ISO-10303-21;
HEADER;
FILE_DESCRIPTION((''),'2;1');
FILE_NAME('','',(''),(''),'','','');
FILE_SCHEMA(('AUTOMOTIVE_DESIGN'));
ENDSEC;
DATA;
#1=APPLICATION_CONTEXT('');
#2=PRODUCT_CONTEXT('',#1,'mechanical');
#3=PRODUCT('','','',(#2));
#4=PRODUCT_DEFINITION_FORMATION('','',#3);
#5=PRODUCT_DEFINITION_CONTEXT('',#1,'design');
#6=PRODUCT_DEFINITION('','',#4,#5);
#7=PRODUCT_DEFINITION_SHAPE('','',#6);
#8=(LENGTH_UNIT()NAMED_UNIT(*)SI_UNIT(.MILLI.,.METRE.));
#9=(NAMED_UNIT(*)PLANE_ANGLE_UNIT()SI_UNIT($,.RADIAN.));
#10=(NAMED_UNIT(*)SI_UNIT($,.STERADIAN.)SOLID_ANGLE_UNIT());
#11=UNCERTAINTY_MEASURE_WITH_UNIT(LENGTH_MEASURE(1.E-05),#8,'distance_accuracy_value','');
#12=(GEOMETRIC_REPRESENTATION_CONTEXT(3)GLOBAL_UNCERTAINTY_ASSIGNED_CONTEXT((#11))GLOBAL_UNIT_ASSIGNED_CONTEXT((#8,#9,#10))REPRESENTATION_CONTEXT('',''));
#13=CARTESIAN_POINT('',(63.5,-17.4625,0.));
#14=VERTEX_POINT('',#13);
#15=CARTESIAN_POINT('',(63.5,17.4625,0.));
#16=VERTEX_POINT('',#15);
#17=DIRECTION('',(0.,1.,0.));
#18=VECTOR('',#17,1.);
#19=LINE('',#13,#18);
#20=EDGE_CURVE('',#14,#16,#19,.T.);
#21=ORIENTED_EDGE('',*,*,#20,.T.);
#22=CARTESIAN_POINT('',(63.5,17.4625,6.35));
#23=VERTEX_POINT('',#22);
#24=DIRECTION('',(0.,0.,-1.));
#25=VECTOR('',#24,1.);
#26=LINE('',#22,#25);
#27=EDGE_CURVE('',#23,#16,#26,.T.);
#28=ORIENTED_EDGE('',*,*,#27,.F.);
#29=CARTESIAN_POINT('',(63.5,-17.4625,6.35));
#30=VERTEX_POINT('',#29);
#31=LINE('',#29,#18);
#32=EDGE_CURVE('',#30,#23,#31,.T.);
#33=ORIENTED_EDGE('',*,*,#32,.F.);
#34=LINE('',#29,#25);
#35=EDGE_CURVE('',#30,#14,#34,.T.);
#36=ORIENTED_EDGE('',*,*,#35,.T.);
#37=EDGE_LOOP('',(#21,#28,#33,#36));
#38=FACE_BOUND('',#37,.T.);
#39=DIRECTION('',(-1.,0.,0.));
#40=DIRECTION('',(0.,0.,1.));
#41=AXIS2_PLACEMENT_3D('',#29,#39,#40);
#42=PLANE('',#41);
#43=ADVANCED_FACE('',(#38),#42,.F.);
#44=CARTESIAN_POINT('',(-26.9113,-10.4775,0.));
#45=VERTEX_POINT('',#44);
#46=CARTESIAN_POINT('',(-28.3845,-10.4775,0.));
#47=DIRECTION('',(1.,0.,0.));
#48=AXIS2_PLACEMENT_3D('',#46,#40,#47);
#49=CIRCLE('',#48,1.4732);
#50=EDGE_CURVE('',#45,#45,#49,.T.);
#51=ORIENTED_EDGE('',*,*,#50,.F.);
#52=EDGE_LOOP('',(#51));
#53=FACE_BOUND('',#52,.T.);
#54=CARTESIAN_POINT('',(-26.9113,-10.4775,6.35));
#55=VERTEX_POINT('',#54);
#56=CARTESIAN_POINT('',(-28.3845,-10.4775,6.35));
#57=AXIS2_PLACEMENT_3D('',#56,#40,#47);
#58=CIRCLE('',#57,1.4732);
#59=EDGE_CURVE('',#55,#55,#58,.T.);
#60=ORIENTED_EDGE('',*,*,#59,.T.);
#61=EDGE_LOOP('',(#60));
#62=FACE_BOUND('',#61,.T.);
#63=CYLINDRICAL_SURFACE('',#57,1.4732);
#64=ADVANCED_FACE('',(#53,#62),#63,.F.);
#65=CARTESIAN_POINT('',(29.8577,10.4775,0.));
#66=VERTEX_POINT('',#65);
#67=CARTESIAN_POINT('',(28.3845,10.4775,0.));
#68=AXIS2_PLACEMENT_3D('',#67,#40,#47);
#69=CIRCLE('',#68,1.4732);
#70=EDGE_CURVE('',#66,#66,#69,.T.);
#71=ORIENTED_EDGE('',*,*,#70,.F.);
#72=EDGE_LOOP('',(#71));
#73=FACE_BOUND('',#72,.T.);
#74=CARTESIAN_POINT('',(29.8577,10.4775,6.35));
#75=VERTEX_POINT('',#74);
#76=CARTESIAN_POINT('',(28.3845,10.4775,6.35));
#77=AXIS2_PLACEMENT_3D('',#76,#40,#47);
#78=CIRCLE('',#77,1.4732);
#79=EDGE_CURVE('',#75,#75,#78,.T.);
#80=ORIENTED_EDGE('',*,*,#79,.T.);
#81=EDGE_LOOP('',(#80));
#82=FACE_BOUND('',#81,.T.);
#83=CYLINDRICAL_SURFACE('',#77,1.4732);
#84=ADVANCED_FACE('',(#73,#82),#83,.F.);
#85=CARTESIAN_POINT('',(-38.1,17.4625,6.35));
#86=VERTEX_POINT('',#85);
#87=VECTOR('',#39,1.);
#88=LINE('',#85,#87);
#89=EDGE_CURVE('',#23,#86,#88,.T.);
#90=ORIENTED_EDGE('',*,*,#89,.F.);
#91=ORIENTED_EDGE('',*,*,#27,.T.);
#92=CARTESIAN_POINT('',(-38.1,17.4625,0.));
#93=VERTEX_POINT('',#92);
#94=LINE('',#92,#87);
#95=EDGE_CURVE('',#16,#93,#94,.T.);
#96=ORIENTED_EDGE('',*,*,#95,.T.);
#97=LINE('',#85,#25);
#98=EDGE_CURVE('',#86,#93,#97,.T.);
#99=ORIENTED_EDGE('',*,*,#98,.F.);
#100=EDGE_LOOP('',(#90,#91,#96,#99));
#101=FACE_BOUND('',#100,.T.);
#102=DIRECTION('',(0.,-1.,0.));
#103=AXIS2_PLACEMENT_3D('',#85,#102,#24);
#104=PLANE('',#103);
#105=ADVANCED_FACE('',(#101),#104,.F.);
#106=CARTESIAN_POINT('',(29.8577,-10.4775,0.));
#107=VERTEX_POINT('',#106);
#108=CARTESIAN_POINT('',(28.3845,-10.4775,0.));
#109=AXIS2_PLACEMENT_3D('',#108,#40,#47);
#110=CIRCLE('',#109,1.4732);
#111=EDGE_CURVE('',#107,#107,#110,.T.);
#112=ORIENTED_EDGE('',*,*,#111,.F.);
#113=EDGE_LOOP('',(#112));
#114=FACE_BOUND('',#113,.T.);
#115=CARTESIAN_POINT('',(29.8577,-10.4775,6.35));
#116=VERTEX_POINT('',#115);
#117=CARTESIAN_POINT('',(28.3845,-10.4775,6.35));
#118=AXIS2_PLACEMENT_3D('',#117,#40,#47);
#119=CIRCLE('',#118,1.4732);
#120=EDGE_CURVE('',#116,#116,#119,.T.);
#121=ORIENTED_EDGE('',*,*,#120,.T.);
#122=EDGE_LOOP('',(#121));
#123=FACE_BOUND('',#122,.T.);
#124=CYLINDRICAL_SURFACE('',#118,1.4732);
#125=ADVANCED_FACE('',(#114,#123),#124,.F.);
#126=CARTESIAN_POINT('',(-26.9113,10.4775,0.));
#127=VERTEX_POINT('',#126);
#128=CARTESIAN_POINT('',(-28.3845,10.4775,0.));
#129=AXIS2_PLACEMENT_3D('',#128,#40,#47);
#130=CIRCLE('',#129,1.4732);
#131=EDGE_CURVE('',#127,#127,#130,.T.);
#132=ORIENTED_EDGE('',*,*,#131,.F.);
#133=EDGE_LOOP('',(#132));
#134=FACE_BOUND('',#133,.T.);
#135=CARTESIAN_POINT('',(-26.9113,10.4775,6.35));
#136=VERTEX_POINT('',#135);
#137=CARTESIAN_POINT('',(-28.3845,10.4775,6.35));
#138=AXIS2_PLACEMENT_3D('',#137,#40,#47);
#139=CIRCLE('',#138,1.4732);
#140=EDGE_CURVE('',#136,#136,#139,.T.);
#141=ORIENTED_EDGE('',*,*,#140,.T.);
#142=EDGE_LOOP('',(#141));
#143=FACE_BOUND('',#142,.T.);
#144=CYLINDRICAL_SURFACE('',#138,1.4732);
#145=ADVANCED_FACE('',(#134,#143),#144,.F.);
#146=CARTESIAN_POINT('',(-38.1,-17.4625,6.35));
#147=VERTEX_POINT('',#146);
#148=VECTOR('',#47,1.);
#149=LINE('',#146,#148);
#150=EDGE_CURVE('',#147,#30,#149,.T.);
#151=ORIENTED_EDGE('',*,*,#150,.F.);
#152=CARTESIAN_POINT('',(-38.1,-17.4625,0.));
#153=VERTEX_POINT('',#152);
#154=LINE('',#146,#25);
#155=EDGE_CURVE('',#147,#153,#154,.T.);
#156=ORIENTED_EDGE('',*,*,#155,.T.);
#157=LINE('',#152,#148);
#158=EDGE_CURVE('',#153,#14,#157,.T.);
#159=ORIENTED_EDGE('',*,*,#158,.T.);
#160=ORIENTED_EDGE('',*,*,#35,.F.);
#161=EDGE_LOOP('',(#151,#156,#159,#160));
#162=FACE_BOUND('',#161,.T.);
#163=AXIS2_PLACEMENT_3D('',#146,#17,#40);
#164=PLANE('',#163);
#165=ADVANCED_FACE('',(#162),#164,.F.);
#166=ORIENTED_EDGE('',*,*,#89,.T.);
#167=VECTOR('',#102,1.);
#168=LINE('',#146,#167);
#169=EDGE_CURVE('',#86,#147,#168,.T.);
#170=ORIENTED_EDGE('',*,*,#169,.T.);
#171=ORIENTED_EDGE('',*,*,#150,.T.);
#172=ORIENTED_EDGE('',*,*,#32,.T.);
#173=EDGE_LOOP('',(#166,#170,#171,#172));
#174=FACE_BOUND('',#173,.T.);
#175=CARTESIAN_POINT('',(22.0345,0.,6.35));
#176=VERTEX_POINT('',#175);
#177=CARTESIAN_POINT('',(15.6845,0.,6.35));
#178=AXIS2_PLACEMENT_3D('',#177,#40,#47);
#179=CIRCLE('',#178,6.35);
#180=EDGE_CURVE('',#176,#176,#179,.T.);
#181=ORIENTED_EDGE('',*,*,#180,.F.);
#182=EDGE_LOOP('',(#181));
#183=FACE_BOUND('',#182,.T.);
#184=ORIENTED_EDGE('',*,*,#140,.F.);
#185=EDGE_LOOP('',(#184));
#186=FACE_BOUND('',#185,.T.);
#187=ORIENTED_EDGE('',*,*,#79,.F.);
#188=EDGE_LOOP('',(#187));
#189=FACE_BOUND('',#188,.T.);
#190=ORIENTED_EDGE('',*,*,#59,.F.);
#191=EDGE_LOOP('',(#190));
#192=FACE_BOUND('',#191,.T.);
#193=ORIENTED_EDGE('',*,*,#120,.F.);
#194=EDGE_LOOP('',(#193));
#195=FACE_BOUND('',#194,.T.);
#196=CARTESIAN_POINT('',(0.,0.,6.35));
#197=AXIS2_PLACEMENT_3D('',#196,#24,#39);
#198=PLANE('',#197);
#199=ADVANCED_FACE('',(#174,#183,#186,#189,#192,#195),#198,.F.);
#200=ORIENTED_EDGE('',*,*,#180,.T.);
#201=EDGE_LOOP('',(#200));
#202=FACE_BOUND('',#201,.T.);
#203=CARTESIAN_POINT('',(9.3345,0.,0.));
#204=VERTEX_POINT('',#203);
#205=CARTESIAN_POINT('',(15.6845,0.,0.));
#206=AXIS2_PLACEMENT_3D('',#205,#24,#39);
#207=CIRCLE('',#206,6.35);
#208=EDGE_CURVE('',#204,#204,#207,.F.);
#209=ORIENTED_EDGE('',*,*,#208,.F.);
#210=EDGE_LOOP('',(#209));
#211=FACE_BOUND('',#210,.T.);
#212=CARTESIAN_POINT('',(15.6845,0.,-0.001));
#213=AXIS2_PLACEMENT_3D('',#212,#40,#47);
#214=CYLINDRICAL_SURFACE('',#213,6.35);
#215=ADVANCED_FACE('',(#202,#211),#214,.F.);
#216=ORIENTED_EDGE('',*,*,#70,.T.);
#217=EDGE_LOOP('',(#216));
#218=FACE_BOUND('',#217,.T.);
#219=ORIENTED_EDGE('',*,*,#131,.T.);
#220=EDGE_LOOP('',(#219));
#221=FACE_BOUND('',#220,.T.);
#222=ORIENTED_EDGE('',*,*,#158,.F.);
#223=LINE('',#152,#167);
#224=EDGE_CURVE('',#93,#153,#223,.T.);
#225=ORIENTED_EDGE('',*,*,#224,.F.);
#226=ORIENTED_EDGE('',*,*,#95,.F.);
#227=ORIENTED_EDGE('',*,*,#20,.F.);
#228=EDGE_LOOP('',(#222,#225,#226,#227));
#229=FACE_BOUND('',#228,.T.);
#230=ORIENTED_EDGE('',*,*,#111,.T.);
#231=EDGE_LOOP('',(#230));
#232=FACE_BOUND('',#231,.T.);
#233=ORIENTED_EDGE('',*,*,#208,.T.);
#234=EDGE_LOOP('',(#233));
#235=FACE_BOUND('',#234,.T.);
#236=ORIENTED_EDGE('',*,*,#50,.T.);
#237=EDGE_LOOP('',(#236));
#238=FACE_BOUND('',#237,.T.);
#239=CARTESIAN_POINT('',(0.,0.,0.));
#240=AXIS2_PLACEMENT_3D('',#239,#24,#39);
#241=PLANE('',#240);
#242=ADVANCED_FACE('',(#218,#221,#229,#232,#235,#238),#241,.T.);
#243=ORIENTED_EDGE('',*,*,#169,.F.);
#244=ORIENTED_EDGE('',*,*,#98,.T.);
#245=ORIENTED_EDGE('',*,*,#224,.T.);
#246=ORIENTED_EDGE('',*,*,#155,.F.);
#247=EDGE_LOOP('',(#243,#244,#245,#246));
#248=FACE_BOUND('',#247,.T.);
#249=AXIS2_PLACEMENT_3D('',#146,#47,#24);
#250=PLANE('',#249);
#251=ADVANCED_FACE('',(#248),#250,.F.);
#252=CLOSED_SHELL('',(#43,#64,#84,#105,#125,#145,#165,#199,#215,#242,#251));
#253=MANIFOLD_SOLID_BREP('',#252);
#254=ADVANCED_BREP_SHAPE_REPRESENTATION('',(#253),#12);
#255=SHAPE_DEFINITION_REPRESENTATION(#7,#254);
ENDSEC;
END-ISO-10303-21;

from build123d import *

# Parameters (mm, degrees)
SKETCH1_W               = 101.6
SKETCH1_H               = 34.925
BOSS_EXTRUDE1_DEPTH     = 6.35
ADVANCEDHOLE1_OUTLINE_R = 1.4732
ADVANCEDHOLE1_DEPTH     = 6.35
CUT_EXTRUDE1_REACH      = 68.163
SKETCH5_R               = 6.35


# Read off the part's stored shape, not the designer's step: AdvancedHole1
with BuildPart() as part:
    # Sketch1 → Boss-Extrude1 (new body)
    with BuildSketch(Plane.XY):
        with Locations((12.7, 0)):
            Rectangle(SKETCH1_W, SKETCH1_H)
    extrude(amount=BOSS_EXTRUDE1_DEPTH)

    # AdvancedHole1 outline → AdvancedHole1 (cut)
    with BuildSketch(Plane.XY):
        with Locations((28.3845, 10.4775)):
            Circle(ADVANCEDHOLE1_OUTLINE_R)
        with Locations((28.3845, -10.4775)):
            Circle(ADVANCEDHOLE1_OUTLINE_R)
        with Locations((-28.3845, -10.4775)):
            Circle(ADVANCEDHOLE1_OUTLINE_R)
        with Locations((-28.3845, 10.4775)):
            Circle(ADVANCEDHOLE1_OUTLINE_R)
    extrude(amount=ADVANCEDHOLE1_DEPTH, mode=Mode.SUBTRACT)

    # Sketch5 → Cut-Extrude1 (cut, up to next)
    with BuildSketch(Plane.XY.offset(6.35), mode=Mode.PRIVATE) as cut_extrude1_sk1:
        with Locations((15.6845, 0)):
            Circle(SKETCH5_R)
    cut_extrude1_tool1 = extrude(cut_extrude1_sk1.sketch, amount=-CUT_EXTRUDE1_REACH, mode=Mode.PRIVATE) & part.part
    add(cut_extrude1_tool1.solids().sort_by_distance((15.6845, 0, 6.35))[0], mode=Mode.SUBTRACT)


solid = part.part
